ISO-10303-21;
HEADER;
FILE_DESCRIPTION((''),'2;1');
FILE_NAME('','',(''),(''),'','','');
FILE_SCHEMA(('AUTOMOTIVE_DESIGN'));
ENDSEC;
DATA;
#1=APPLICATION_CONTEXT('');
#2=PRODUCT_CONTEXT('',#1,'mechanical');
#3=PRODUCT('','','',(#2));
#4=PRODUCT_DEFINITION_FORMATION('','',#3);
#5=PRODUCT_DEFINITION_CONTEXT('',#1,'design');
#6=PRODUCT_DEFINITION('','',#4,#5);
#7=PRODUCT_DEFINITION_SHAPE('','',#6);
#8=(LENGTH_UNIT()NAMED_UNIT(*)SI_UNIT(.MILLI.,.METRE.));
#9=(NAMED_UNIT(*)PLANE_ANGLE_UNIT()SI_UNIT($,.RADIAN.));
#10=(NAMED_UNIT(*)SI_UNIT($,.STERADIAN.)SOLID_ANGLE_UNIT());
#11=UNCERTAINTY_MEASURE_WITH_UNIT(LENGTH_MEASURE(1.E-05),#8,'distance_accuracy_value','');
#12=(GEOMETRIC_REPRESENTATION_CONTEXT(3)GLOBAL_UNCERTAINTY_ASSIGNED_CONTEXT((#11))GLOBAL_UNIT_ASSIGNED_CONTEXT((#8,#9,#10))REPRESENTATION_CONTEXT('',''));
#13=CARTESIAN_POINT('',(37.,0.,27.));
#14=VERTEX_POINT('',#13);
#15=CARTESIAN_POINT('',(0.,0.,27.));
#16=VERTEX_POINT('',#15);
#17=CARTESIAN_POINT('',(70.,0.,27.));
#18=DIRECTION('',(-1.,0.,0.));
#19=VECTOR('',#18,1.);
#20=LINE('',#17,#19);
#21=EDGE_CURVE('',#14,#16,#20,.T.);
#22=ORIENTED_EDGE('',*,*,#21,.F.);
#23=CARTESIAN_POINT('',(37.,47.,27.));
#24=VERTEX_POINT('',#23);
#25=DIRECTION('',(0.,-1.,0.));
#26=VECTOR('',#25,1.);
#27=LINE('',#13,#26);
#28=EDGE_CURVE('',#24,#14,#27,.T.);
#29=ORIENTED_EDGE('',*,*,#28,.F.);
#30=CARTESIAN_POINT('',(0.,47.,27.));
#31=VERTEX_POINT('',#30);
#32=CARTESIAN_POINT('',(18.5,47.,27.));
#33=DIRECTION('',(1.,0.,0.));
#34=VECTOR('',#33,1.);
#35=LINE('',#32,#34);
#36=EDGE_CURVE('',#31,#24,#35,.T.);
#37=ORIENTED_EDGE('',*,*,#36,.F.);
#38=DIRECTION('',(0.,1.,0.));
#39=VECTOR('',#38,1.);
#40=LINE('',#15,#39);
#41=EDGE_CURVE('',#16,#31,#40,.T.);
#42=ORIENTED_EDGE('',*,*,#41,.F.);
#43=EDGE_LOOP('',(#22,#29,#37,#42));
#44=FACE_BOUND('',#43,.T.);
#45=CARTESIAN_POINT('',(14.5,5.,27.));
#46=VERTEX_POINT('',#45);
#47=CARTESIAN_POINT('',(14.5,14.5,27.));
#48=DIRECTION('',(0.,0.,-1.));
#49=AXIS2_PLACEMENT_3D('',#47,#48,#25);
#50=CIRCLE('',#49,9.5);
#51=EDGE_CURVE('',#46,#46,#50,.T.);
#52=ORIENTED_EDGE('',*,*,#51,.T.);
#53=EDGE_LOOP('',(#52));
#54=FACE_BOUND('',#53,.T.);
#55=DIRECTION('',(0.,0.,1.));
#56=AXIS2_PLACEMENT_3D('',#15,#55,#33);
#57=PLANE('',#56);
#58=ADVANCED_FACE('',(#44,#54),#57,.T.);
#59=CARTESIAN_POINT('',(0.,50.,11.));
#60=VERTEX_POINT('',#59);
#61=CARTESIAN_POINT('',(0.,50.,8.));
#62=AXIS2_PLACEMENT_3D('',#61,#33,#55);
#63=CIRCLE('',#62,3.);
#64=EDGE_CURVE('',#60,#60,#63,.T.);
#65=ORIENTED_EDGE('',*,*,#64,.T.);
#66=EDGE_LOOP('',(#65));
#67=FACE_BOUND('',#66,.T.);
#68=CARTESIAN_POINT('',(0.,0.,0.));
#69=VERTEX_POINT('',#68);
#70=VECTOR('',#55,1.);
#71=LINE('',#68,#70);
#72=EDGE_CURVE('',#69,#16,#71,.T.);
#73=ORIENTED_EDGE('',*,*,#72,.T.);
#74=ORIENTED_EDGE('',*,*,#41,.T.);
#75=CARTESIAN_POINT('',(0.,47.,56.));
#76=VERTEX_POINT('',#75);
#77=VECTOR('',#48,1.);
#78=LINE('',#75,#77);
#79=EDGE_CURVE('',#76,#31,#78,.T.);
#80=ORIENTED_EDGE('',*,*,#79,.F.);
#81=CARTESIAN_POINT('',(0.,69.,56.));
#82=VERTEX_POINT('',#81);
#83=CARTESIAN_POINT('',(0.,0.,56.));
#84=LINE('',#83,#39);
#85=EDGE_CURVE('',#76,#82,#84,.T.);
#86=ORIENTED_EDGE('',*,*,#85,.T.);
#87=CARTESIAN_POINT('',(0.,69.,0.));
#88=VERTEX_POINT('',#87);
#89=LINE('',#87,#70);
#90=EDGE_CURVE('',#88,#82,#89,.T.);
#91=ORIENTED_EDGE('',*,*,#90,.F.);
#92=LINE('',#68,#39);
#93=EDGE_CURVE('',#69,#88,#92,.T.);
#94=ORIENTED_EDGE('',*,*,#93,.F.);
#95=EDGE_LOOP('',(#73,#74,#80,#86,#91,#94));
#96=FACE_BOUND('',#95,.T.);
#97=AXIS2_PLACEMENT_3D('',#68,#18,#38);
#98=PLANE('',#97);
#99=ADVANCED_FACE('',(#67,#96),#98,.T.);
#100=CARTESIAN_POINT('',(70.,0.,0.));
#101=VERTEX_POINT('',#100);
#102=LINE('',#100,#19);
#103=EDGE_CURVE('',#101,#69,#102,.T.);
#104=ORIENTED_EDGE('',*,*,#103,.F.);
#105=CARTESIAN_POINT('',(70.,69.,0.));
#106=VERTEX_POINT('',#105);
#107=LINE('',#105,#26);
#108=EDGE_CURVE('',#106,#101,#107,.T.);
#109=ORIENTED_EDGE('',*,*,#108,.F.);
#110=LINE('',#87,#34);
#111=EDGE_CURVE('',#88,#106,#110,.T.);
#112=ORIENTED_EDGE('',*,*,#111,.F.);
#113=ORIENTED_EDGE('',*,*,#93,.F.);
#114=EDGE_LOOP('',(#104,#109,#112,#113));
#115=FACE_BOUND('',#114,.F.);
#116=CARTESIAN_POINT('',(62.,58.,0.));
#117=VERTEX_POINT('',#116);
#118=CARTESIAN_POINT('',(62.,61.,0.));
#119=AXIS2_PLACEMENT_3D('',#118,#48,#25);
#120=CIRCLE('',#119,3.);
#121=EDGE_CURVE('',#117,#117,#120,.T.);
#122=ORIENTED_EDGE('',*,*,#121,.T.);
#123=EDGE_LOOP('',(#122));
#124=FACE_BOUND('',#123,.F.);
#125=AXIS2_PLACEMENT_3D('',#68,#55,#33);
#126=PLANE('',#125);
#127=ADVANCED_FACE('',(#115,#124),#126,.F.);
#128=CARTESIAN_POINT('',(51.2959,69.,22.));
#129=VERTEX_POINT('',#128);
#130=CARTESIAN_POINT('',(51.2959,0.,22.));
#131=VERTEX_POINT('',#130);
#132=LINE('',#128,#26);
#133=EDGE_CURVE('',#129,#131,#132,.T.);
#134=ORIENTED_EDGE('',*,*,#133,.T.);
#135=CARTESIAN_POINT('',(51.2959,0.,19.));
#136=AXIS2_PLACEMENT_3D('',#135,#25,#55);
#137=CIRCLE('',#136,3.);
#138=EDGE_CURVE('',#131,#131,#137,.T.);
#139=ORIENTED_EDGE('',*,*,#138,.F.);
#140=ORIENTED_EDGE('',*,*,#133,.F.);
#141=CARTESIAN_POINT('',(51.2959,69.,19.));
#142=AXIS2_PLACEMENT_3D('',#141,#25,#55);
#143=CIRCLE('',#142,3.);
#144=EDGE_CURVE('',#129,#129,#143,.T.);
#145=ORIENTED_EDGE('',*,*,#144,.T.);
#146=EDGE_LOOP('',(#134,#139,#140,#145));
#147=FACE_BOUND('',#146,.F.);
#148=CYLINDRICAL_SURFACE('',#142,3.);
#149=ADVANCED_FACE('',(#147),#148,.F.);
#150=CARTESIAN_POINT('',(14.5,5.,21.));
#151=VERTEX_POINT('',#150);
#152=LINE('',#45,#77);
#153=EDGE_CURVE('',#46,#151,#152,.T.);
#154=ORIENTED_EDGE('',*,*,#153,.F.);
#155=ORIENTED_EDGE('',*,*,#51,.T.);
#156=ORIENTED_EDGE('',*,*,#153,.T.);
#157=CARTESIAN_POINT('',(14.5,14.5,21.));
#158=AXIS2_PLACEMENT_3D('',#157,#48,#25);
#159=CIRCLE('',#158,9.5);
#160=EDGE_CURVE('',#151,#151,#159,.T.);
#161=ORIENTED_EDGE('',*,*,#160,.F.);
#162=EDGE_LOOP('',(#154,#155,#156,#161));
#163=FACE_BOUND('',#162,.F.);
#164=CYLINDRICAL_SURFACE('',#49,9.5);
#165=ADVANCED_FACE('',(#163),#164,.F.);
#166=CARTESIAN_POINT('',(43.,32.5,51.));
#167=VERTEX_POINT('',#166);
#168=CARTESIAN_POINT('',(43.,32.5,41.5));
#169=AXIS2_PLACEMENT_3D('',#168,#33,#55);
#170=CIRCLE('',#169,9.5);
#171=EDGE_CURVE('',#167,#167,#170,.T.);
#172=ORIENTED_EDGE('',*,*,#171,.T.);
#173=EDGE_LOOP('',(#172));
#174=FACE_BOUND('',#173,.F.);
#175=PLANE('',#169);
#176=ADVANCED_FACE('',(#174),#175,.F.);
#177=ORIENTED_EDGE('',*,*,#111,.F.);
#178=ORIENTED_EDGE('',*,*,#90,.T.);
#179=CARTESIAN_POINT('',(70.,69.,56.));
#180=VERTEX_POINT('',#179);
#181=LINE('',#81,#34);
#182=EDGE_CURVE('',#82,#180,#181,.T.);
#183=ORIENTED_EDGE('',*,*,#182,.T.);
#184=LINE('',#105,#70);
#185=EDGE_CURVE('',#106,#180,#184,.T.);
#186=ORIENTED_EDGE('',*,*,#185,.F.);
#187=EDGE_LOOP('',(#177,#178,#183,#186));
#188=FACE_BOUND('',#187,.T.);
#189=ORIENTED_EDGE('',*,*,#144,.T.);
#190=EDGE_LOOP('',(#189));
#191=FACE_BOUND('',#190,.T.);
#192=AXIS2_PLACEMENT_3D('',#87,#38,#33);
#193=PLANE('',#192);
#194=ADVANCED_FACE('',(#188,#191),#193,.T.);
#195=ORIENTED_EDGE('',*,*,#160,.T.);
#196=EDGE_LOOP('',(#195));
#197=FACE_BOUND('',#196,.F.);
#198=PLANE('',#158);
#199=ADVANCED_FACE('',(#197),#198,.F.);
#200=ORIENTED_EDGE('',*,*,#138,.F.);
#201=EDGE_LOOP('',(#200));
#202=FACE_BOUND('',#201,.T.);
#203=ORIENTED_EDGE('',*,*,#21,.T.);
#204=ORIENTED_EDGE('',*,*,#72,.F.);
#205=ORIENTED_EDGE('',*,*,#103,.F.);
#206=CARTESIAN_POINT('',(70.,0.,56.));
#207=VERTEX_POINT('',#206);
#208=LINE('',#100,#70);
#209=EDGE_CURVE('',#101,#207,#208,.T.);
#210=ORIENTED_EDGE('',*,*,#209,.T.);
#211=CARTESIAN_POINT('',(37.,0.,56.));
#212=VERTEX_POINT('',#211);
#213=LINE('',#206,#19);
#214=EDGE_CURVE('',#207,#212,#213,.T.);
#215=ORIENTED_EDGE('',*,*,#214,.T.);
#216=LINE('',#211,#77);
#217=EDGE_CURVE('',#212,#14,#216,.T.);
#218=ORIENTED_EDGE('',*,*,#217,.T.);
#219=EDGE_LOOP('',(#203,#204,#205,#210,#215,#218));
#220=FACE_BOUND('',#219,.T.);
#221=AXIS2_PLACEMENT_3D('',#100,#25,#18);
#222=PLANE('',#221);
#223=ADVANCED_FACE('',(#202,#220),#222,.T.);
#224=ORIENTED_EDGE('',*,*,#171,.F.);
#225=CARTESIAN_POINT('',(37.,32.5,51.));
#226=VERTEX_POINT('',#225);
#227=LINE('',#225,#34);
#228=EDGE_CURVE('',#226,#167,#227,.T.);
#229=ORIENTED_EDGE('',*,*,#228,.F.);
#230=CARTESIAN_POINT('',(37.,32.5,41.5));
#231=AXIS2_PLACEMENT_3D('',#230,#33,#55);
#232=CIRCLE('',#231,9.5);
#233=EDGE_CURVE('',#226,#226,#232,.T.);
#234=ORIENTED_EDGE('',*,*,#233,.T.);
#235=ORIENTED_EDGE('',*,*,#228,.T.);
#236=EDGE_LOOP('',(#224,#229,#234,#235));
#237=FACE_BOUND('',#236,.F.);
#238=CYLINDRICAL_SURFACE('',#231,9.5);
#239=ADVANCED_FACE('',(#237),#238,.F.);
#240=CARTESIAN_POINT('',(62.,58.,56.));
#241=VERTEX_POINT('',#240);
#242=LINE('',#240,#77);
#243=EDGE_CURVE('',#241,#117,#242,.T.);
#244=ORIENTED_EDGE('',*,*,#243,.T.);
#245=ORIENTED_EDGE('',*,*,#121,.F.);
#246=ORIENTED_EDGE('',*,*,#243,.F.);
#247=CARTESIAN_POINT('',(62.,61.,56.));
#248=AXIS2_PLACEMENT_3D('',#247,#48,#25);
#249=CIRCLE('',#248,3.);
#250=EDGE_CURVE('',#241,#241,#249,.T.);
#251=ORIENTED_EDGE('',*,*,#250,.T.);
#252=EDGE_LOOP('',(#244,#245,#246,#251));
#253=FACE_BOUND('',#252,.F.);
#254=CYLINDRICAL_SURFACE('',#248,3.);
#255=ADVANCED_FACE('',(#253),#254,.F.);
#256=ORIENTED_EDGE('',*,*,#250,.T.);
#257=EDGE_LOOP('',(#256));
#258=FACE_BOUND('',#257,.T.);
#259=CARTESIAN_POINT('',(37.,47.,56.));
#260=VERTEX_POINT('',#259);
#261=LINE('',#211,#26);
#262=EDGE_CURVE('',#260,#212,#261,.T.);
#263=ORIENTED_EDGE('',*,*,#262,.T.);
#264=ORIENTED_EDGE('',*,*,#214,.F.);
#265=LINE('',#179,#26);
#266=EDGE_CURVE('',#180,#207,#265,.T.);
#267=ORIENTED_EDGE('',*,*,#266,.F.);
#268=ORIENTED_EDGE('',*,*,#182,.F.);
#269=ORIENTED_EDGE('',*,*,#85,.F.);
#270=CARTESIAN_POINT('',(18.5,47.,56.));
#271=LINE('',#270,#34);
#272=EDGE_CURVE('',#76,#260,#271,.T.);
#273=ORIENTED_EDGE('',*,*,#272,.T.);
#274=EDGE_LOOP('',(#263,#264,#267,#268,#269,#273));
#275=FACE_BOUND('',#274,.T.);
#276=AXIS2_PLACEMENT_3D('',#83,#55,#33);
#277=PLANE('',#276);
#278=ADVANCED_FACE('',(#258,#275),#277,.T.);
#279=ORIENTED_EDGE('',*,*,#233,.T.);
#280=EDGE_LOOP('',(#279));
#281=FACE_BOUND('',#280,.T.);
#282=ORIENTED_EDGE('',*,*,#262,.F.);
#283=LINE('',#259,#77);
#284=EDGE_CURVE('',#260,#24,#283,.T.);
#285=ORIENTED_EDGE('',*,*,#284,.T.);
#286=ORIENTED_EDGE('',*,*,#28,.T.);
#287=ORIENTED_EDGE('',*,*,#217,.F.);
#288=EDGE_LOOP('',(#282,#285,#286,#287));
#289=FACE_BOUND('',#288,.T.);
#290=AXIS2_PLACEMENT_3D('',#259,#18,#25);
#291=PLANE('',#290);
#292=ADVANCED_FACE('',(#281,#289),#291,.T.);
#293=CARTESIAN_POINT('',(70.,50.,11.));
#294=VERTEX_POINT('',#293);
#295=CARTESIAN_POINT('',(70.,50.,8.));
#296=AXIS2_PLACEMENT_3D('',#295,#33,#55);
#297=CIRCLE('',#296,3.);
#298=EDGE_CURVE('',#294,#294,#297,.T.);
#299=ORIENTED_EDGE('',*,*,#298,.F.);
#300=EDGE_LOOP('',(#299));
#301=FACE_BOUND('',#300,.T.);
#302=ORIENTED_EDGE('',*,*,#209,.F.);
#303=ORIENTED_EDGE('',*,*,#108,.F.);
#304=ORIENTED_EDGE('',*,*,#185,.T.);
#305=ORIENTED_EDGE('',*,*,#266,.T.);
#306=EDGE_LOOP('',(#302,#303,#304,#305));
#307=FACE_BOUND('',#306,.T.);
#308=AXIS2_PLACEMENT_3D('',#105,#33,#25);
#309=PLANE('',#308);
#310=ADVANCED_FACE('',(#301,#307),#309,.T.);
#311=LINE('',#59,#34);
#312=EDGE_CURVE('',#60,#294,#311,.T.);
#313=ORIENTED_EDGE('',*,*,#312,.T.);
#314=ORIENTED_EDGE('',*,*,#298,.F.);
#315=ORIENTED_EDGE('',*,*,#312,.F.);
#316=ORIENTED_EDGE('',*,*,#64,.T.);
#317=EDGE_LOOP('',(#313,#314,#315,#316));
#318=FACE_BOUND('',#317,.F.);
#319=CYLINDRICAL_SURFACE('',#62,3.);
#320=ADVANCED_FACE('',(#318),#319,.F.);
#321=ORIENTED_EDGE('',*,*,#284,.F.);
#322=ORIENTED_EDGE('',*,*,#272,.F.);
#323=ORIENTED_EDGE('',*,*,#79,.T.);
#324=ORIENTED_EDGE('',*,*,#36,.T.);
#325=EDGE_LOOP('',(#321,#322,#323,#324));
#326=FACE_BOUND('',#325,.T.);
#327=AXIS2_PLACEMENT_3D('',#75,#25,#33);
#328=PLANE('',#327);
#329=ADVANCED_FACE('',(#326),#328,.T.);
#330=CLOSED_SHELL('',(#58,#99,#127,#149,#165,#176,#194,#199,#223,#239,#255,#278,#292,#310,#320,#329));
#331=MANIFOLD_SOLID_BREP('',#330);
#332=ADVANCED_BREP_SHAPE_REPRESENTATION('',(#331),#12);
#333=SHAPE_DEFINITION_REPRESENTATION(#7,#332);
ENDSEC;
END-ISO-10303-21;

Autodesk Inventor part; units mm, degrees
ref_plane "YZ Plane" through (0, 0, 0) normal (1, 0, 0) x (0, 1, 0)
ref_plane "XZ Plane" through (0, 0, 0) normal (0, 1, 0) x (-1, 0, 0)
ref_plane "XY Plane" through (0, 0, 0) normal (0, 0, 1) x (1, 0, 0)
sketch "Sketch1" plane through (0, 0, 0) normal (0, 0, 1) x (1, 0, 0)
  line L0 (0, 0) -> (0, 69)
  line L1 (0, 69) -> (70, 69)
  line L2 (70, 69) -> (70, 0)
  line L3 (70, 0) -> (0, 0)
  dimension "d0" = 69
  dimension "d1" = 70
extrude "Extrusion1" add sketch "Sketch1" along normal blind 56
sketch "Sketch2" plane through (0, 0, 56) normal (0, 0, 1) x (1, 0, 0)
  line L0 (0, 0) -> (37, 0)
  line L1 (37, 0) -> (37, 47)
  line L2 (37, 47) -> (0, 47)
  line L3 (0, 47) -> (0, 0)
  dimension "d4" = 37
  dimension "d5" = 47
emboss "Emboss1" sketch "Sketch2" operation cut depth 29 direction (0, 0, -1)
sketch "Sketch3" plane through (0, 0, 56) normal (0, 0, 1) x (1, 0, 0)
  circle A0 centre (62, 61) radius 3
  point P0 (0, 0)
  point P1 (70, 69)
  dimension "d10" = 6
hole "Hole1" at (62, 61, 56) direction (0, 0, -1) diameter 6 end through all
sketch "Sketch4" plane through (0, 0, 0) normal (-1, 0, 0) x (0, 0, 1)
  circle A0 centre (8, 50) radius 3
  point P0 (0, 69)
  dimension "d20" = 6
hole "Hole2" at (0, 50, 8) direction (1, 0, 0) diameter 6 end through all
sketch "Sketch5" plane through (0, 69, 0) normal (0, 1, 0) x (1, 0, 0)
  circle A0 centre (51.2959, -19) radius 3
  dimension "d30" = 6
hole "Hole3" at (51.2959, 69, 19) direction (0, -1, 0) diameter 6 end through all
sketch "Sketch6" plane through (0, 47, 27) normal (0, 0, 1) x (1, 0, 0)
  circle A0 centre (14.5, -32.5) radius 9.5
  dimension "d40" = 19
hole "Hole4" at (14.5, 14.5, 27) direction (0, 0, -1) diameter 19 depth 6
sketch "Sketch7" plane through (37, 0, 56) normal (-1, 0, 0) x (0, 0, 1)
  circle A0 centre (-14.5, 32.5) radius 9.5
  point P0 (-56, 0)
  point P1 (-29, 47)
  dimension "d50" = 19
hole "Hole5" at (37, 32.5, 41.5) direction (1, 0, 0) diameter 19 depth 6
properties part number "Tophjørne1" material "PC/ABS Plastic"
